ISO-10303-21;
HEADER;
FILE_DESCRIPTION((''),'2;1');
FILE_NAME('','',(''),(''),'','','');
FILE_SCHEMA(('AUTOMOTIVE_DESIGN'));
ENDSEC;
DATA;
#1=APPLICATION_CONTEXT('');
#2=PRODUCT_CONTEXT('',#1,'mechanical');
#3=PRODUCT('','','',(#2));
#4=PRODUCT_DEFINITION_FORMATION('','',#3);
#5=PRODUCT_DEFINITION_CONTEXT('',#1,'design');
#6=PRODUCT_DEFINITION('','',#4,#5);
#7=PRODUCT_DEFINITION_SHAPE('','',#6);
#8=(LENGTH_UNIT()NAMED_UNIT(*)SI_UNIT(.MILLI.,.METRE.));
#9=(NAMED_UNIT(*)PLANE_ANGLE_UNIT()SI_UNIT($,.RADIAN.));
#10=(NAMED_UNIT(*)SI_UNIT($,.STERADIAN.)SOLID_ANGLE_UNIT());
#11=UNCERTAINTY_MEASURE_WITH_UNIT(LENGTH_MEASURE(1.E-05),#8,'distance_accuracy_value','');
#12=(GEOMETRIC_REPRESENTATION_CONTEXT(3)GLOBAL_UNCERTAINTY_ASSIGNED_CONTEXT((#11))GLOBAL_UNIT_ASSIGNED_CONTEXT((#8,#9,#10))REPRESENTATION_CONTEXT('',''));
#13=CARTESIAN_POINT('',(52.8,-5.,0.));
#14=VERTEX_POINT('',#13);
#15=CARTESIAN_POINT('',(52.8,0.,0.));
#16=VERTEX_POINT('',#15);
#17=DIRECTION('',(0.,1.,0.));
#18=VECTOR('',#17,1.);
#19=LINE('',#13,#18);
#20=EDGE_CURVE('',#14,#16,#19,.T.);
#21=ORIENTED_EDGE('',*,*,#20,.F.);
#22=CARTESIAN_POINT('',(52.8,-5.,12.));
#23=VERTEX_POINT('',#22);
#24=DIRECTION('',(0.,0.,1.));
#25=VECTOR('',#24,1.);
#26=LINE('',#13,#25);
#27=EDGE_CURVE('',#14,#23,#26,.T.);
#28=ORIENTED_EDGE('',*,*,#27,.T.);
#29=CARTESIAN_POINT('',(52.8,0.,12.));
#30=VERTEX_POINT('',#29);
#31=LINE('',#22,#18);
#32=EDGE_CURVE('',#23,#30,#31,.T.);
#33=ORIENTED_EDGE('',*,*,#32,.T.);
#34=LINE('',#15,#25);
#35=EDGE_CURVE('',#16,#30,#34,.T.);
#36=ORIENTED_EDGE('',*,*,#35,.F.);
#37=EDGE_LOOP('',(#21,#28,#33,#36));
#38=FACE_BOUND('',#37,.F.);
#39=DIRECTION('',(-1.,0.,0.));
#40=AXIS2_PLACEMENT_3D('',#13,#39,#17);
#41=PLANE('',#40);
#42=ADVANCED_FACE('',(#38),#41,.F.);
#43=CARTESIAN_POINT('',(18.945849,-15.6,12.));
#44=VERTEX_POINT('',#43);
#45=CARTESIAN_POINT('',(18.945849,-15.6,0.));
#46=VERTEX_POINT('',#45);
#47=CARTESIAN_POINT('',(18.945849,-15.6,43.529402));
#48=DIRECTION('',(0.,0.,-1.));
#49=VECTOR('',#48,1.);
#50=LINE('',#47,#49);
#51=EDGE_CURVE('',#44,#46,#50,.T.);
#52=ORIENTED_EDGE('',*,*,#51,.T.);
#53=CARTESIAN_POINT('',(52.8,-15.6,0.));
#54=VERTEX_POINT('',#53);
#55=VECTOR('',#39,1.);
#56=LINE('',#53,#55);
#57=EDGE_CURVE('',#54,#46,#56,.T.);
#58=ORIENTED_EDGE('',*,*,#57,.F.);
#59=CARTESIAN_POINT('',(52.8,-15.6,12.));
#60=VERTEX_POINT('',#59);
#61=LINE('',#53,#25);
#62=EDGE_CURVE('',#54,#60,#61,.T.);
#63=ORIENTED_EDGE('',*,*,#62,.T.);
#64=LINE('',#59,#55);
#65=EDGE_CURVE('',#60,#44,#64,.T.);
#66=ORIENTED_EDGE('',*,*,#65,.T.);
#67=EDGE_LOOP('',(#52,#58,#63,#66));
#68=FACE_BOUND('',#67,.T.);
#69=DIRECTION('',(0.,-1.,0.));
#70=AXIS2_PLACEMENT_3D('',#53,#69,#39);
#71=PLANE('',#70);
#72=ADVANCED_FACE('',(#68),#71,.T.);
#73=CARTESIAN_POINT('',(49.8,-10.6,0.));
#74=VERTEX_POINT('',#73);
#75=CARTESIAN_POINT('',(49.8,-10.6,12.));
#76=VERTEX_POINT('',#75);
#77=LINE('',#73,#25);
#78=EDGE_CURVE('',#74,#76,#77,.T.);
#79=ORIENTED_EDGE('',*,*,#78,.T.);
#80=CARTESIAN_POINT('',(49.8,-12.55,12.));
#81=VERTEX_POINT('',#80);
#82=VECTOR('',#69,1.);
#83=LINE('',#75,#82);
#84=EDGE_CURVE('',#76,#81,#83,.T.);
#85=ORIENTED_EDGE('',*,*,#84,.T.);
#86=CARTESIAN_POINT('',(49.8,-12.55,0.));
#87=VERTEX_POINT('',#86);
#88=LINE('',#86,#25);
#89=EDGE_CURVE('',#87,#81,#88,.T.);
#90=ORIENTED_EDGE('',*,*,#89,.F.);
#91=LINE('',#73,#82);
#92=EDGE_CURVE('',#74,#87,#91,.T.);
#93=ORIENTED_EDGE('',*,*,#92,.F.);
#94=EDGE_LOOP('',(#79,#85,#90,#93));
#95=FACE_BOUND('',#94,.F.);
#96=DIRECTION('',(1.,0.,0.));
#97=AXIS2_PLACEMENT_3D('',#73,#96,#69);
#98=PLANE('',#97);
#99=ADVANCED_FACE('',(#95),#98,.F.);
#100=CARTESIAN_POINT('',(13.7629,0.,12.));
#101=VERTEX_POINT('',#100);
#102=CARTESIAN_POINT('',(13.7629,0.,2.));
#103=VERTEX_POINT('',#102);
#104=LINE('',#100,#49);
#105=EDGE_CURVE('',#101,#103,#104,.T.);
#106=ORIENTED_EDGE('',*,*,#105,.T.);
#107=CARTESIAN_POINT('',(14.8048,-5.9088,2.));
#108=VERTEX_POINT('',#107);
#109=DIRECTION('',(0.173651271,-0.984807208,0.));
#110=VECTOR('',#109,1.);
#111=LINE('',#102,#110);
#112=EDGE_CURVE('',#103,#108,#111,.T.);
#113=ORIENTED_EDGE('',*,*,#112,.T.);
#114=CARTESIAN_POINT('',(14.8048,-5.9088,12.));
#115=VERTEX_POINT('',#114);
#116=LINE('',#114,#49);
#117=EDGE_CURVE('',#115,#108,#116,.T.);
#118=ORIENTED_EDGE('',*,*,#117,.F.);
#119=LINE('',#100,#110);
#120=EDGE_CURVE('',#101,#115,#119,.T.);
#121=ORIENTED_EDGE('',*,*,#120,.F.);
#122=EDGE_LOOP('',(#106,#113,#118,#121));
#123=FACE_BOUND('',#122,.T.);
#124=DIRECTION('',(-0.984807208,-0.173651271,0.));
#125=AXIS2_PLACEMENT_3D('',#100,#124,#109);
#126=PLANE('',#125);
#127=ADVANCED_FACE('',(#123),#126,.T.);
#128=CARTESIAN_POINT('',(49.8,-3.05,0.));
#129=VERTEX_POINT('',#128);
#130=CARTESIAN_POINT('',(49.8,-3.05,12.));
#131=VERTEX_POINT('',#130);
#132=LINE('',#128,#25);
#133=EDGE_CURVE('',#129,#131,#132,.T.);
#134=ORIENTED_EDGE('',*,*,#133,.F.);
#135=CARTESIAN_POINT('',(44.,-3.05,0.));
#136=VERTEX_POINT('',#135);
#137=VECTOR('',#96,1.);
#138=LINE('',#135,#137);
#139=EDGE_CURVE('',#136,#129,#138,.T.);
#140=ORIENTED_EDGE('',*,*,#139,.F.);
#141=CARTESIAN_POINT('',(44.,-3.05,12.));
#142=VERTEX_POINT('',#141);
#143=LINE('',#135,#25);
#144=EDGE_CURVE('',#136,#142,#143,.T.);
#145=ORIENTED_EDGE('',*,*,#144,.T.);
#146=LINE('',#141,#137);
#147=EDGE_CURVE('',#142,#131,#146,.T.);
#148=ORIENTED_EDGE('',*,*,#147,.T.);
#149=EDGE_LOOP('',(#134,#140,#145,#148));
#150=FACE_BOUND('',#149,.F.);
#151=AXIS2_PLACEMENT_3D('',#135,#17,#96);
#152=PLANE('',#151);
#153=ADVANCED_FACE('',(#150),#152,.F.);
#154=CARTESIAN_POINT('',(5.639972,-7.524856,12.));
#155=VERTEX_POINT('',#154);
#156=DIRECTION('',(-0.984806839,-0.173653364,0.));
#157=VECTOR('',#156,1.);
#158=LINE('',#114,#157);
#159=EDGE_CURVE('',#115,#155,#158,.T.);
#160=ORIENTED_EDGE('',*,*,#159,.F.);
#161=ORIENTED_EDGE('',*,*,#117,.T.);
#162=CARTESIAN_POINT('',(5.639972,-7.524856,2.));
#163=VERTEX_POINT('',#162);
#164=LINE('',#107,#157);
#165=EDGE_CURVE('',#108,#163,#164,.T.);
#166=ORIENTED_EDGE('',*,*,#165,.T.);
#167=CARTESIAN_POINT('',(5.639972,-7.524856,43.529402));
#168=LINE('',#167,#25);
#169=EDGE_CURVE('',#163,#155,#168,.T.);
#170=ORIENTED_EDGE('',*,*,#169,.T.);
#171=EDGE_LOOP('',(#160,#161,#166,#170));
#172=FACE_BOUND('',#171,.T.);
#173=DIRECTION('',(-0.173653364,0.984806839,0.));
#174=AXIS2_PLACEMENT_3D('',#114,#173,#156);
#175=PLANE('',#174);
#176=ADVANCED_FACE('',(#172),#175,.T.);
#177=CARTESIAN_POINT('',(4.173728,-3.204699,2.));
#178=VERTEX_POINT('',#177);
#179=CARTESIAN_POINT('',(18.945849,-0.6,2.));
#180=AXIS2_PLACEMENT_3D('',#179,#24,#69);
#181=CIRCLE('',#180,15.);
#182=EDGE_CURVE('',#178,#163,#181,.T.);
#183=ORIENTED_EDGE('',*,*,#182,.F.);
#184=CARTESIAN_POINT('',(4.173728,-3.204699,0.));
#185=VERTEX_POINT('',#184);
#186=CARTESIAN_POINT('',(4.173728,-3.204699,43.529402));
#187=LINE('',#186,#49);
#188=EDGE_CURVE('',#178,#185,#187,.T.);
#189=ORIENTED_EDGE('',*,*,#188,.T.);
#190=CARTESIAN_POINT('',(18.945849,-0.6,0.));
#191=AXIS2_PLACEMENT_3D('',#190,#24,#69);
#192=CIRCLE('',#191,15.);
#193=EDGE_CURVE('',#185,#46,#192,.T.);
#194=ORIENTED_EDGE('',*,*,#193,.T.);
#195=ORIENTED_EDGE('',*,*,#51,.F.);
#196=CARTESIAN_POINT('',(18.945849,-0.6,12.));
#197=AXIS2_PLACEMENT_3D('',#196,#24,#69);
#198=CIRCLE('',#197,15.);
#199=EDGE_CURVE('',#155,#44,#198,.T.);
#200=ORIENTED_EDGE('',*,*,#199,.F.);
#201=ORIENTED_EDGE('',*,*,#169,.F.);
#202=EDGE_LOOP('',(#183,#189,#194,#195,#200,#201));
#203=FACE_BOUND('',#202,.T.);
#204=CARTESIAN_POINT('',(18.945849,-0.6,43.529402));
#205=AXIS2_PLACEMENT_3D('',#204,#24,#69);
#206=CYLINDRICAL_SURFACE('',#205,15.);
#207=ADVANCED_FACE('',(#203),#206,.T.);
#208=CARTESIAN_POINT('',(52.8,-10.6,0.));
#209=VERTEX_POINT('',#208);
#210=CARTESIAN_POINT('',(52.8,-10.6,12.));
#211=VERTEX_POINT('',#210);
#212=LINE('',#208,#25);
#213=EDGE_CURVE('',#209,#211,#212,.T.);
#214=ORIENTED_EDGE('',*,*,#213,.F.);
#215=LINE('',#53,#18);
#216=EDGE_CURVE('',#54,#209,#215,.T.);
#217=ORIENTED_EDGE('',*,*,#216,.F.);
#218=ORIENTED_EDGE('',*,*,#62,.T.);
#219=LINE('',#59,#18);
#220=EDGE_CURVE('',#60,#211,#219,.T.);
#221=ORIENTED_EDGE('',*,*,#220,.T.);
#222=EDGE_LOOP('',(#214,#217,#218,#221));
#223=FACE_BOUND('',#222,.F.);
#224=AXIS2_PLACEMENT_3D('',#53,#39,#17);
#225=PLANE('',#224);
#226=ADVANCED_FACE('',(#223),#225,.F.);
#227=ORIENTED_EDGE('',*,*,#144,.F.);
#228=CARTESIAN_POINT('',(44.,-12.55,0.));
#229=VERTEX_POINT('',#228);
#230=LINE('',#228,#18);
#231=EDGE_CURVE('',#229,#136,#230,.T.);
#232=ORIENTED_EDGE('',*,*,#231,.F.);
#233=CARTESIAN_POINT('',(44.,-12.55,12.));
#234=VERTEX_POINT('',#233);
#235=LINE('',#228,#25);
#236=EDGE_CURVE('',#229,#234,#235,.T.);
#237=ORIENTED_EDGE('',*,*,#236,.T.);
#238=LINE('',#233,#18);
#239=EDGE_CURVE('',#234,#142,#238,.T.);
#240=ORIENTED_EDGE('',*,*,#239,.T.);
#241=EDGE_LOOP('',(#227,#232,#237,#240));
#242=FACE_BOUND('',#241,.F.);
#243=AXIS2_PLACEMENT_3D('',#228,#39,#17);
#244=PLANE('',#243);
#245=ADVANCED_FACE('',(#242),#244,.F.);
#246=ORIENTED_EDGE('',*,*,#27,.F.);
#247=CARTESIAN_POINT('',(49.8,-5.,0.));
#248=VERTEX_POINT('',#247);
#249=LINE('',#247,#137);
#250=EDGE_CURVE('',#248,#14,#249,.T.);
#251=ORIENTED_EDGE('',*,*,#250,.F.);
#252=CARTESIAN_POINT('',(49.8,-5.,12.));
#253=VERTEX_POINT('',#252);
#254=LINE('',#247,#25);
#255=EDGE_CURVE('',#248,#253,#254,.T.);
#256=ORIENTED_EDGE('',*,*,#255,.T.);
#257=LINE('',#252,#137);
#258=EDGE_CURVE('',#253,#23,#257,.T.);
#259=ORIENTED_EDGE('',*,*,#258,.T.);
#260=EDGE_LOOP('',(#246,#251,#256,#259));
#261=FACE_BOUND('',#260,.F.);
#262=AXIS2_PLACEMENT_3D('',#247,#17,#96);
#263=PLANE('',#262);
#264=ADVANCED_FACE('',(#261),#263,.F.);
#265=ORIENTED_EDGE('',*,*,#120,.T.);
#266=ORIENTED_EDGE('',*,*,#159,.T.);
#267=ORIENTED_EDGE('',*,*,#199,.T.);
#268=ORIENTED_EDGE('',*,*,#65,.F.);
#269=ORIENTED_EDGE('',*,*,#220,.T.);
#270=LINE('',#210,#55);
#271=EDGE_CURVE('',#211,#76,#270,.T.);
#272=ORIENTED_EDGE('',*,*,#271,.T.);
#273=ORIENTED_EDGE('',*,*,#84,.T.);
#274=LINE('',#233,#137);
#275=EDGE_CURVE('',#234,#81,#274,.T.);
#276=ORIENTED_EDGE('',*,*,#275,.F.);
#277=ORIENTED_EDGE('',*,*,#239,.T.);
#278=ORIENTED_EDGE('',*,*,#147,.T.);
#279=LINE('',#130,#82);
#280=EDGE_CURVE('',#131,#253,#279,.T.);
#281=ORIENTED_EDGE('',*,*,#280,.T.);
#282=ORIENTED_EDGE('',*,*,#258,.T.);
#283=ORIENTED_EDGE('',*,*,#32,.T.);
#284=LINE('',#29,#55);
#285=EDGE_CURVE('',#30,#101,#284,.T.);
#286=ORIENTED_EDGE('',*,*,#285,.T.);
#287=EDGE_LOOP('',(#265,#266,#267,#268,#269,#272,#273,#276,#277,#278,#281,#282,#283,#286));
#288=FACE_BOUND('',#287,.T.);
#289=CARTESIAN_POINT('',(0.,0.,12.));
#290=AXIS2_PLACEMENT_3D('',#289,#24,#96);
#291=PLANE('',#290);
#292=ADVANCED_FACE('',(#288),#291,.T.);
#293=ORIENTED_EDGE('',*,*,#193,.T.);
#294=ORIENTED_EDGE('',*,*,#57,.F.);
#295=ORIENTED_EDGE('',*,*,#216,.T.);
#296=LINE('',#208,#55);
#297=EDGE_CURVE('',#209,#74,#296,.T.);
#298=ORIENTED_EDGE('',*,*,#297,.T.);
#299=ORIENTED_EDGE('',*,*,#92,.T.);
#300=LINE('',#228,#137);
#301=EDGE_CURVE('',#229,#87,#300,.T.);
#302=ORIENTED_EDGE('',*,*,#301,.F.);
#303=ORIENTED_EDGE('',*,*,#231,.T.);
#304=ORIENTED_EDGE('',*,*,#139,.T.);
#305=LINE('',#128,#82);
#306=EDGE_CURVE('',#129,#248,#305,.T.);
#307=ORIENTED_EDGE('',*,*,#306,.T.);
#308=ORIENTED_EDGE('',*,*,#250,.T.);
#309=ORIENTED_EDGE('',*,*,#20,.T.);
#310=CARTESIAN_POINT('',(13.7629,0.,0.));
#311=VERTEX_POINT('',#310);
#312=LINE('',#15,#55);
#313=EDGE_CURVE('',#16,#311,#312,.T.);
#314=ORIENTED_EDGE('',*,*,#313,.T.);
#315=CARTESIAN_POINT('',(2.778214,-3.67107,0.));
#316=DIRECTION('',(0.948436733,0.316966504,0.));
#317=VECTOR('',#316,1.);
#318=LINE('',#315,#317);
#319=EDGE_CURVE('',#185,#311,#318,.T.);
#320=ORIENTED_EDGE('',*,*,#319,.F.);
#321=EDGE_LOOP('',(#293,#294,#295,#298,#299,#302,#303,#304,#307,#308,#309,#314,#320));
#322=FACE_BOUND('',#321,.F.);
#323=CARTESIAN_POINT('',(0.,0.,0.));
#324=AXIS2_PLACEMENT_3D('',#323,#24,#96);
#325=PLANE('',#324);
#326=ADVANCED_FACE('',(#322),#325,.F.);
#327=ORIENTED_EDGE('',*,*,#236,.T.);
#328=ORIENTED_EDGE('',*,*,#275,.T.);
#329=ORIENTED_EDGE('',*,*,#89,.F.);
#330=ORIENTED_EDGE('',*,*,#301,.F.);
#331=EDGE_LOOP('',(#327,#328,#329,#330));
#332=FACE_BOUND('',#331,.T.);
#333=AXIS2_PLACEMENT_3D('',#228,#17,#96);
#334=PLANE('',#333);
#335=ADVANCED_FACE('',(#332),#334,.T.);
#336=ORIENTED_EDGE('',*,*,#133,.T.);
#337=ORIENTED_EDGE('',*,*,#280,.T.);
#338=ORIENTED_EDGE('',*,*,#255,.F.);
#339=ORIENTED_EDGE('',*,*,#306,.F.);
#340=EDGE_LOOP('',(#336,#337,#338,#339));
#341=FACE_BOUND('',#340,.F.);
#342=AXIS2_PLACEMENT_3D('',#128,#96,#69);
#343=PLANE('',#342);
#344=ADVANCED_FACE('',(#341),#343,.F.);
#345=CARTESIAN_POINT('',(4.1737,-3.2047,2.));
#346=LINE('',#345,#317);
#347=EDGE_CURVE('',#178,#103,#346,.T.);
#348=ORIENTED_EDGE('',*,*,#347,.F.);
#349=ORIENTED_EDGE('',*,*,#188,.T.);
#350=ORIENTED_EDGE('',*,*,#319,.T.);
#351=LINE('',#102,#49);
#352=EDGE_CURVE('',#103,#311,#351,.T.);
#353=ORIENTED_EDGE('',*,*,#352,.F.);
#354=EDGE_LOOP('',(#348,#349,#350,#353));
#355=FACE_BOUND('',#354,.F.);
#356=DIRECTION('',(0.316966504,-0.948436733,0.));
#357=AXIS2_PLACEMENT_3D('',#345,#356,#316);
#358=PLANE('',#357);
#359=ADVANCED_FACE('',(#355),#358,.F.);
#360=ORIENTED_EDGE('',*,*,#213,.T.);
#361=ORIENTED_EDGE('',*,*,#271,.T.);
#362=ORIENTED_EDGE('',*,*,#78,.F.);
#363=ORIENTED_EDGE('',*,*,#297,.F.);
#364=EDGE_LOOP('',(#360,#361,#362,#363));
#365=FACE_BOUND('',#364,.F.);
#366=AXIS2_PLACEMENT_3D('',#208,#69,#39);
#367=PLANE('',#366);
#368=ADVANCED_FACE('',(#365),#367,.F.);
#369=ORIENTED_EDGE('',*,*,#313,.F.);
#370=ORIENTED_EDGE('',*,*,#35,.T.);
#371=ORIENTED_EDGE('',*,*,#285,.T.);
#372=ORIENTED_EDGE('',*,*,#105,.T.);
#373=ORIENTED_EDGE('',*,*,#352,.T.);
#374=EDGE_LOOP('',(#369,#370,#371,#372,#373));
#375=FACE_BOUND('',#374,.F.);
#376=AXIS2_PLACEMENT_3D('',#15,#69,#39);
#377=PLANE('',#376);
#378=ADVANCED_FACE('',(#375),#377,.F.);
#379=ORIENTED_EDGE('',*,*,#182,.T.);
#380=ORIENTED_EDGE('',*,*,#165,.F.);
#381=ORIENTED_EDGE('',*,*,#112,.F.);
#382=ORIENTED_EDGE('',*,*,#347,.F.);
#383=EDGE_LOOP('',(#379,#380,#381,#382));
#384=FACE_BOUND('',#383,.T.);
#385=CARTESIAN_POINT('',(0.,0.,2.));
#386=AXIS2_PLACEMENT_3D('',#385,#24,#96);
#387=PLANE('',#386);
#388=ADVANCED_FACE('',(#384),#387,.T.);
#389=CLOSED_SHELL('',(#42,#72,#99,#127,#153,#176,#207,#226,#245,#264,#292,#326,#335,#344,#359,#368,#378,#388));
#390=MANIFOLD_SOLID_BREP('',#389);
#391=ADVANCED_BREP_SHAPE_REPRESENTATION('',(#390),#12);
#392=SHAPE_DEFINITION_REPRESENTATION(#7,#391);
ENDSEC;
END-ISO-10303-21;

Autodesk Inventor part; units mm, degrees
ref_plane "YZ Plane" through (0, 0, 0) normal (1, 0, 0) x (0, 1, 0)
ref_plane "XZ Plane" through (0, 0, 0) normal (0, 1, 0) x (-1, 0, 0)
ref_plane "XY Plane" through (0, 0, 0) normal (0, 0, 1) x (1, 0, 0)
sketch "Sketch5" plane through (0, 0, 0) normal (0, 0, 1) x (1, 0, 0)
  line L0 (52.8, -15.6) -> (52.8, -10.6)
  line L1 (52.8, -10.6) -> (49.8, -10.6)
  line L2 (49.8, -10.6) -> (49.8, -12.55)
  line L3 (44, -12.55) -> (44, -3.05)
  line L4 (49.8, -3.05) -> (49.8, -5)
  line L5 (49.8, -5) -> (52.8, -5)
  line L6 (52.8, -5) -> (52.8, 0)
  line L7 (52.8, 0) -> (7.8, 0)
  line L8 (44, -3.05) -> (49.8, -3.05)
  line L9 (44, -12.55) -> (49.8, -12.55)
  line L10 (52.8, -15.6) -> (7.8, -15.6)
  arc A0 (7.8, 0) -> (7.8, -15.6) centre (7.8, -7.8) ccw
  point P0 (0, 0)
  dimension "d41" = 5.8
  dimension "d48" = 44
  dimension "d50" = 3
  dimension "d63" = 45
  dimension "d67" = 15.6
  dimension "d71" = 0
  dimension "d72" = 36.2
  dimension "d87" = 5.6
  dimension "d88" = 9.5
extrude "Extrusion2" add sketch "Sketch5" along normal blind 12
sketch "Sketch11" plane through (0, 0, 12) normal (0, 0, 1) x (1, 0, 0)
  line L0 (52.8, 0) -> (7.8, 0) projected
  line L1 (13.7629, 0) -> (14.8048, -5.9088)
  line L2 (14.8048, -5.9088) -> (0.0327, -8.5136)
  arc A0 (7.8, 0) -> (7.8, -15.6) centre (7.8, -7.8) ccw projected
  point P0 (0, 0)
  dimension "d95" = 100
  dimension "d96" = 6
  dimension "d97" = 15
extrude "Extrusion7" cut sketch "Sketch11" against normal blind 10 from surface at 0
sketch "Sketch14" plane through (0, 0, 12) normal (0, 0, 1) x (1, 0, 0)
  line L0 (2.9017, 4.0094) -> (7.1924, -20.3246)
  line L1 (7.1924, -20.3246) -> (-9.1714, -23.21)
  line L2 (-9.1714, -23.21) -> (-13.4621, 1.124)
  line L3 (-13.4621, 1.124) -> (2.9017, 4.0094)
  line L4 (13.7629, 0) -> (14.8048, -5.9088) projected
  point P0 (0, 0)
  dimension "d107" = 10
extrude "Extrusion10" cut sketch "Sketch14" against normal through all
fillet "Fillet2" radius 15 1 edges at (6.3349, -15.4612, 6)
sketch "Sketch15" plane through (7.8, 0, 2) normal (0, 0, 1) x (1, 0, 0)
  arc A0 (-3.6263, -3.2047) -> (11.1459, -15.6) centre (11.1459, -0.6) ccw projected
  line L0 (45, 0) -> (5.9629, 0) projected
  line L1 (-3.6263, -3.2047) -> (5.9629, 0)
  line L2 (-3.997, -1.102) -> (-3.6263, -3.2047) projected
  arc A1 (0, 0) -> (-3.997, -1.102) centre (0, -7.8) ccw projected
  line L3 (5.9629, 0) -> (0, 0) projected
  point P0 (-7.8, 0)
extrude "Extrusion11" cut sketch "Sketch15" against normal blind 10
equation "\"l1\" = 8"
properties part number "Finray_test_8_Kerbe_10deg_V4_links"
